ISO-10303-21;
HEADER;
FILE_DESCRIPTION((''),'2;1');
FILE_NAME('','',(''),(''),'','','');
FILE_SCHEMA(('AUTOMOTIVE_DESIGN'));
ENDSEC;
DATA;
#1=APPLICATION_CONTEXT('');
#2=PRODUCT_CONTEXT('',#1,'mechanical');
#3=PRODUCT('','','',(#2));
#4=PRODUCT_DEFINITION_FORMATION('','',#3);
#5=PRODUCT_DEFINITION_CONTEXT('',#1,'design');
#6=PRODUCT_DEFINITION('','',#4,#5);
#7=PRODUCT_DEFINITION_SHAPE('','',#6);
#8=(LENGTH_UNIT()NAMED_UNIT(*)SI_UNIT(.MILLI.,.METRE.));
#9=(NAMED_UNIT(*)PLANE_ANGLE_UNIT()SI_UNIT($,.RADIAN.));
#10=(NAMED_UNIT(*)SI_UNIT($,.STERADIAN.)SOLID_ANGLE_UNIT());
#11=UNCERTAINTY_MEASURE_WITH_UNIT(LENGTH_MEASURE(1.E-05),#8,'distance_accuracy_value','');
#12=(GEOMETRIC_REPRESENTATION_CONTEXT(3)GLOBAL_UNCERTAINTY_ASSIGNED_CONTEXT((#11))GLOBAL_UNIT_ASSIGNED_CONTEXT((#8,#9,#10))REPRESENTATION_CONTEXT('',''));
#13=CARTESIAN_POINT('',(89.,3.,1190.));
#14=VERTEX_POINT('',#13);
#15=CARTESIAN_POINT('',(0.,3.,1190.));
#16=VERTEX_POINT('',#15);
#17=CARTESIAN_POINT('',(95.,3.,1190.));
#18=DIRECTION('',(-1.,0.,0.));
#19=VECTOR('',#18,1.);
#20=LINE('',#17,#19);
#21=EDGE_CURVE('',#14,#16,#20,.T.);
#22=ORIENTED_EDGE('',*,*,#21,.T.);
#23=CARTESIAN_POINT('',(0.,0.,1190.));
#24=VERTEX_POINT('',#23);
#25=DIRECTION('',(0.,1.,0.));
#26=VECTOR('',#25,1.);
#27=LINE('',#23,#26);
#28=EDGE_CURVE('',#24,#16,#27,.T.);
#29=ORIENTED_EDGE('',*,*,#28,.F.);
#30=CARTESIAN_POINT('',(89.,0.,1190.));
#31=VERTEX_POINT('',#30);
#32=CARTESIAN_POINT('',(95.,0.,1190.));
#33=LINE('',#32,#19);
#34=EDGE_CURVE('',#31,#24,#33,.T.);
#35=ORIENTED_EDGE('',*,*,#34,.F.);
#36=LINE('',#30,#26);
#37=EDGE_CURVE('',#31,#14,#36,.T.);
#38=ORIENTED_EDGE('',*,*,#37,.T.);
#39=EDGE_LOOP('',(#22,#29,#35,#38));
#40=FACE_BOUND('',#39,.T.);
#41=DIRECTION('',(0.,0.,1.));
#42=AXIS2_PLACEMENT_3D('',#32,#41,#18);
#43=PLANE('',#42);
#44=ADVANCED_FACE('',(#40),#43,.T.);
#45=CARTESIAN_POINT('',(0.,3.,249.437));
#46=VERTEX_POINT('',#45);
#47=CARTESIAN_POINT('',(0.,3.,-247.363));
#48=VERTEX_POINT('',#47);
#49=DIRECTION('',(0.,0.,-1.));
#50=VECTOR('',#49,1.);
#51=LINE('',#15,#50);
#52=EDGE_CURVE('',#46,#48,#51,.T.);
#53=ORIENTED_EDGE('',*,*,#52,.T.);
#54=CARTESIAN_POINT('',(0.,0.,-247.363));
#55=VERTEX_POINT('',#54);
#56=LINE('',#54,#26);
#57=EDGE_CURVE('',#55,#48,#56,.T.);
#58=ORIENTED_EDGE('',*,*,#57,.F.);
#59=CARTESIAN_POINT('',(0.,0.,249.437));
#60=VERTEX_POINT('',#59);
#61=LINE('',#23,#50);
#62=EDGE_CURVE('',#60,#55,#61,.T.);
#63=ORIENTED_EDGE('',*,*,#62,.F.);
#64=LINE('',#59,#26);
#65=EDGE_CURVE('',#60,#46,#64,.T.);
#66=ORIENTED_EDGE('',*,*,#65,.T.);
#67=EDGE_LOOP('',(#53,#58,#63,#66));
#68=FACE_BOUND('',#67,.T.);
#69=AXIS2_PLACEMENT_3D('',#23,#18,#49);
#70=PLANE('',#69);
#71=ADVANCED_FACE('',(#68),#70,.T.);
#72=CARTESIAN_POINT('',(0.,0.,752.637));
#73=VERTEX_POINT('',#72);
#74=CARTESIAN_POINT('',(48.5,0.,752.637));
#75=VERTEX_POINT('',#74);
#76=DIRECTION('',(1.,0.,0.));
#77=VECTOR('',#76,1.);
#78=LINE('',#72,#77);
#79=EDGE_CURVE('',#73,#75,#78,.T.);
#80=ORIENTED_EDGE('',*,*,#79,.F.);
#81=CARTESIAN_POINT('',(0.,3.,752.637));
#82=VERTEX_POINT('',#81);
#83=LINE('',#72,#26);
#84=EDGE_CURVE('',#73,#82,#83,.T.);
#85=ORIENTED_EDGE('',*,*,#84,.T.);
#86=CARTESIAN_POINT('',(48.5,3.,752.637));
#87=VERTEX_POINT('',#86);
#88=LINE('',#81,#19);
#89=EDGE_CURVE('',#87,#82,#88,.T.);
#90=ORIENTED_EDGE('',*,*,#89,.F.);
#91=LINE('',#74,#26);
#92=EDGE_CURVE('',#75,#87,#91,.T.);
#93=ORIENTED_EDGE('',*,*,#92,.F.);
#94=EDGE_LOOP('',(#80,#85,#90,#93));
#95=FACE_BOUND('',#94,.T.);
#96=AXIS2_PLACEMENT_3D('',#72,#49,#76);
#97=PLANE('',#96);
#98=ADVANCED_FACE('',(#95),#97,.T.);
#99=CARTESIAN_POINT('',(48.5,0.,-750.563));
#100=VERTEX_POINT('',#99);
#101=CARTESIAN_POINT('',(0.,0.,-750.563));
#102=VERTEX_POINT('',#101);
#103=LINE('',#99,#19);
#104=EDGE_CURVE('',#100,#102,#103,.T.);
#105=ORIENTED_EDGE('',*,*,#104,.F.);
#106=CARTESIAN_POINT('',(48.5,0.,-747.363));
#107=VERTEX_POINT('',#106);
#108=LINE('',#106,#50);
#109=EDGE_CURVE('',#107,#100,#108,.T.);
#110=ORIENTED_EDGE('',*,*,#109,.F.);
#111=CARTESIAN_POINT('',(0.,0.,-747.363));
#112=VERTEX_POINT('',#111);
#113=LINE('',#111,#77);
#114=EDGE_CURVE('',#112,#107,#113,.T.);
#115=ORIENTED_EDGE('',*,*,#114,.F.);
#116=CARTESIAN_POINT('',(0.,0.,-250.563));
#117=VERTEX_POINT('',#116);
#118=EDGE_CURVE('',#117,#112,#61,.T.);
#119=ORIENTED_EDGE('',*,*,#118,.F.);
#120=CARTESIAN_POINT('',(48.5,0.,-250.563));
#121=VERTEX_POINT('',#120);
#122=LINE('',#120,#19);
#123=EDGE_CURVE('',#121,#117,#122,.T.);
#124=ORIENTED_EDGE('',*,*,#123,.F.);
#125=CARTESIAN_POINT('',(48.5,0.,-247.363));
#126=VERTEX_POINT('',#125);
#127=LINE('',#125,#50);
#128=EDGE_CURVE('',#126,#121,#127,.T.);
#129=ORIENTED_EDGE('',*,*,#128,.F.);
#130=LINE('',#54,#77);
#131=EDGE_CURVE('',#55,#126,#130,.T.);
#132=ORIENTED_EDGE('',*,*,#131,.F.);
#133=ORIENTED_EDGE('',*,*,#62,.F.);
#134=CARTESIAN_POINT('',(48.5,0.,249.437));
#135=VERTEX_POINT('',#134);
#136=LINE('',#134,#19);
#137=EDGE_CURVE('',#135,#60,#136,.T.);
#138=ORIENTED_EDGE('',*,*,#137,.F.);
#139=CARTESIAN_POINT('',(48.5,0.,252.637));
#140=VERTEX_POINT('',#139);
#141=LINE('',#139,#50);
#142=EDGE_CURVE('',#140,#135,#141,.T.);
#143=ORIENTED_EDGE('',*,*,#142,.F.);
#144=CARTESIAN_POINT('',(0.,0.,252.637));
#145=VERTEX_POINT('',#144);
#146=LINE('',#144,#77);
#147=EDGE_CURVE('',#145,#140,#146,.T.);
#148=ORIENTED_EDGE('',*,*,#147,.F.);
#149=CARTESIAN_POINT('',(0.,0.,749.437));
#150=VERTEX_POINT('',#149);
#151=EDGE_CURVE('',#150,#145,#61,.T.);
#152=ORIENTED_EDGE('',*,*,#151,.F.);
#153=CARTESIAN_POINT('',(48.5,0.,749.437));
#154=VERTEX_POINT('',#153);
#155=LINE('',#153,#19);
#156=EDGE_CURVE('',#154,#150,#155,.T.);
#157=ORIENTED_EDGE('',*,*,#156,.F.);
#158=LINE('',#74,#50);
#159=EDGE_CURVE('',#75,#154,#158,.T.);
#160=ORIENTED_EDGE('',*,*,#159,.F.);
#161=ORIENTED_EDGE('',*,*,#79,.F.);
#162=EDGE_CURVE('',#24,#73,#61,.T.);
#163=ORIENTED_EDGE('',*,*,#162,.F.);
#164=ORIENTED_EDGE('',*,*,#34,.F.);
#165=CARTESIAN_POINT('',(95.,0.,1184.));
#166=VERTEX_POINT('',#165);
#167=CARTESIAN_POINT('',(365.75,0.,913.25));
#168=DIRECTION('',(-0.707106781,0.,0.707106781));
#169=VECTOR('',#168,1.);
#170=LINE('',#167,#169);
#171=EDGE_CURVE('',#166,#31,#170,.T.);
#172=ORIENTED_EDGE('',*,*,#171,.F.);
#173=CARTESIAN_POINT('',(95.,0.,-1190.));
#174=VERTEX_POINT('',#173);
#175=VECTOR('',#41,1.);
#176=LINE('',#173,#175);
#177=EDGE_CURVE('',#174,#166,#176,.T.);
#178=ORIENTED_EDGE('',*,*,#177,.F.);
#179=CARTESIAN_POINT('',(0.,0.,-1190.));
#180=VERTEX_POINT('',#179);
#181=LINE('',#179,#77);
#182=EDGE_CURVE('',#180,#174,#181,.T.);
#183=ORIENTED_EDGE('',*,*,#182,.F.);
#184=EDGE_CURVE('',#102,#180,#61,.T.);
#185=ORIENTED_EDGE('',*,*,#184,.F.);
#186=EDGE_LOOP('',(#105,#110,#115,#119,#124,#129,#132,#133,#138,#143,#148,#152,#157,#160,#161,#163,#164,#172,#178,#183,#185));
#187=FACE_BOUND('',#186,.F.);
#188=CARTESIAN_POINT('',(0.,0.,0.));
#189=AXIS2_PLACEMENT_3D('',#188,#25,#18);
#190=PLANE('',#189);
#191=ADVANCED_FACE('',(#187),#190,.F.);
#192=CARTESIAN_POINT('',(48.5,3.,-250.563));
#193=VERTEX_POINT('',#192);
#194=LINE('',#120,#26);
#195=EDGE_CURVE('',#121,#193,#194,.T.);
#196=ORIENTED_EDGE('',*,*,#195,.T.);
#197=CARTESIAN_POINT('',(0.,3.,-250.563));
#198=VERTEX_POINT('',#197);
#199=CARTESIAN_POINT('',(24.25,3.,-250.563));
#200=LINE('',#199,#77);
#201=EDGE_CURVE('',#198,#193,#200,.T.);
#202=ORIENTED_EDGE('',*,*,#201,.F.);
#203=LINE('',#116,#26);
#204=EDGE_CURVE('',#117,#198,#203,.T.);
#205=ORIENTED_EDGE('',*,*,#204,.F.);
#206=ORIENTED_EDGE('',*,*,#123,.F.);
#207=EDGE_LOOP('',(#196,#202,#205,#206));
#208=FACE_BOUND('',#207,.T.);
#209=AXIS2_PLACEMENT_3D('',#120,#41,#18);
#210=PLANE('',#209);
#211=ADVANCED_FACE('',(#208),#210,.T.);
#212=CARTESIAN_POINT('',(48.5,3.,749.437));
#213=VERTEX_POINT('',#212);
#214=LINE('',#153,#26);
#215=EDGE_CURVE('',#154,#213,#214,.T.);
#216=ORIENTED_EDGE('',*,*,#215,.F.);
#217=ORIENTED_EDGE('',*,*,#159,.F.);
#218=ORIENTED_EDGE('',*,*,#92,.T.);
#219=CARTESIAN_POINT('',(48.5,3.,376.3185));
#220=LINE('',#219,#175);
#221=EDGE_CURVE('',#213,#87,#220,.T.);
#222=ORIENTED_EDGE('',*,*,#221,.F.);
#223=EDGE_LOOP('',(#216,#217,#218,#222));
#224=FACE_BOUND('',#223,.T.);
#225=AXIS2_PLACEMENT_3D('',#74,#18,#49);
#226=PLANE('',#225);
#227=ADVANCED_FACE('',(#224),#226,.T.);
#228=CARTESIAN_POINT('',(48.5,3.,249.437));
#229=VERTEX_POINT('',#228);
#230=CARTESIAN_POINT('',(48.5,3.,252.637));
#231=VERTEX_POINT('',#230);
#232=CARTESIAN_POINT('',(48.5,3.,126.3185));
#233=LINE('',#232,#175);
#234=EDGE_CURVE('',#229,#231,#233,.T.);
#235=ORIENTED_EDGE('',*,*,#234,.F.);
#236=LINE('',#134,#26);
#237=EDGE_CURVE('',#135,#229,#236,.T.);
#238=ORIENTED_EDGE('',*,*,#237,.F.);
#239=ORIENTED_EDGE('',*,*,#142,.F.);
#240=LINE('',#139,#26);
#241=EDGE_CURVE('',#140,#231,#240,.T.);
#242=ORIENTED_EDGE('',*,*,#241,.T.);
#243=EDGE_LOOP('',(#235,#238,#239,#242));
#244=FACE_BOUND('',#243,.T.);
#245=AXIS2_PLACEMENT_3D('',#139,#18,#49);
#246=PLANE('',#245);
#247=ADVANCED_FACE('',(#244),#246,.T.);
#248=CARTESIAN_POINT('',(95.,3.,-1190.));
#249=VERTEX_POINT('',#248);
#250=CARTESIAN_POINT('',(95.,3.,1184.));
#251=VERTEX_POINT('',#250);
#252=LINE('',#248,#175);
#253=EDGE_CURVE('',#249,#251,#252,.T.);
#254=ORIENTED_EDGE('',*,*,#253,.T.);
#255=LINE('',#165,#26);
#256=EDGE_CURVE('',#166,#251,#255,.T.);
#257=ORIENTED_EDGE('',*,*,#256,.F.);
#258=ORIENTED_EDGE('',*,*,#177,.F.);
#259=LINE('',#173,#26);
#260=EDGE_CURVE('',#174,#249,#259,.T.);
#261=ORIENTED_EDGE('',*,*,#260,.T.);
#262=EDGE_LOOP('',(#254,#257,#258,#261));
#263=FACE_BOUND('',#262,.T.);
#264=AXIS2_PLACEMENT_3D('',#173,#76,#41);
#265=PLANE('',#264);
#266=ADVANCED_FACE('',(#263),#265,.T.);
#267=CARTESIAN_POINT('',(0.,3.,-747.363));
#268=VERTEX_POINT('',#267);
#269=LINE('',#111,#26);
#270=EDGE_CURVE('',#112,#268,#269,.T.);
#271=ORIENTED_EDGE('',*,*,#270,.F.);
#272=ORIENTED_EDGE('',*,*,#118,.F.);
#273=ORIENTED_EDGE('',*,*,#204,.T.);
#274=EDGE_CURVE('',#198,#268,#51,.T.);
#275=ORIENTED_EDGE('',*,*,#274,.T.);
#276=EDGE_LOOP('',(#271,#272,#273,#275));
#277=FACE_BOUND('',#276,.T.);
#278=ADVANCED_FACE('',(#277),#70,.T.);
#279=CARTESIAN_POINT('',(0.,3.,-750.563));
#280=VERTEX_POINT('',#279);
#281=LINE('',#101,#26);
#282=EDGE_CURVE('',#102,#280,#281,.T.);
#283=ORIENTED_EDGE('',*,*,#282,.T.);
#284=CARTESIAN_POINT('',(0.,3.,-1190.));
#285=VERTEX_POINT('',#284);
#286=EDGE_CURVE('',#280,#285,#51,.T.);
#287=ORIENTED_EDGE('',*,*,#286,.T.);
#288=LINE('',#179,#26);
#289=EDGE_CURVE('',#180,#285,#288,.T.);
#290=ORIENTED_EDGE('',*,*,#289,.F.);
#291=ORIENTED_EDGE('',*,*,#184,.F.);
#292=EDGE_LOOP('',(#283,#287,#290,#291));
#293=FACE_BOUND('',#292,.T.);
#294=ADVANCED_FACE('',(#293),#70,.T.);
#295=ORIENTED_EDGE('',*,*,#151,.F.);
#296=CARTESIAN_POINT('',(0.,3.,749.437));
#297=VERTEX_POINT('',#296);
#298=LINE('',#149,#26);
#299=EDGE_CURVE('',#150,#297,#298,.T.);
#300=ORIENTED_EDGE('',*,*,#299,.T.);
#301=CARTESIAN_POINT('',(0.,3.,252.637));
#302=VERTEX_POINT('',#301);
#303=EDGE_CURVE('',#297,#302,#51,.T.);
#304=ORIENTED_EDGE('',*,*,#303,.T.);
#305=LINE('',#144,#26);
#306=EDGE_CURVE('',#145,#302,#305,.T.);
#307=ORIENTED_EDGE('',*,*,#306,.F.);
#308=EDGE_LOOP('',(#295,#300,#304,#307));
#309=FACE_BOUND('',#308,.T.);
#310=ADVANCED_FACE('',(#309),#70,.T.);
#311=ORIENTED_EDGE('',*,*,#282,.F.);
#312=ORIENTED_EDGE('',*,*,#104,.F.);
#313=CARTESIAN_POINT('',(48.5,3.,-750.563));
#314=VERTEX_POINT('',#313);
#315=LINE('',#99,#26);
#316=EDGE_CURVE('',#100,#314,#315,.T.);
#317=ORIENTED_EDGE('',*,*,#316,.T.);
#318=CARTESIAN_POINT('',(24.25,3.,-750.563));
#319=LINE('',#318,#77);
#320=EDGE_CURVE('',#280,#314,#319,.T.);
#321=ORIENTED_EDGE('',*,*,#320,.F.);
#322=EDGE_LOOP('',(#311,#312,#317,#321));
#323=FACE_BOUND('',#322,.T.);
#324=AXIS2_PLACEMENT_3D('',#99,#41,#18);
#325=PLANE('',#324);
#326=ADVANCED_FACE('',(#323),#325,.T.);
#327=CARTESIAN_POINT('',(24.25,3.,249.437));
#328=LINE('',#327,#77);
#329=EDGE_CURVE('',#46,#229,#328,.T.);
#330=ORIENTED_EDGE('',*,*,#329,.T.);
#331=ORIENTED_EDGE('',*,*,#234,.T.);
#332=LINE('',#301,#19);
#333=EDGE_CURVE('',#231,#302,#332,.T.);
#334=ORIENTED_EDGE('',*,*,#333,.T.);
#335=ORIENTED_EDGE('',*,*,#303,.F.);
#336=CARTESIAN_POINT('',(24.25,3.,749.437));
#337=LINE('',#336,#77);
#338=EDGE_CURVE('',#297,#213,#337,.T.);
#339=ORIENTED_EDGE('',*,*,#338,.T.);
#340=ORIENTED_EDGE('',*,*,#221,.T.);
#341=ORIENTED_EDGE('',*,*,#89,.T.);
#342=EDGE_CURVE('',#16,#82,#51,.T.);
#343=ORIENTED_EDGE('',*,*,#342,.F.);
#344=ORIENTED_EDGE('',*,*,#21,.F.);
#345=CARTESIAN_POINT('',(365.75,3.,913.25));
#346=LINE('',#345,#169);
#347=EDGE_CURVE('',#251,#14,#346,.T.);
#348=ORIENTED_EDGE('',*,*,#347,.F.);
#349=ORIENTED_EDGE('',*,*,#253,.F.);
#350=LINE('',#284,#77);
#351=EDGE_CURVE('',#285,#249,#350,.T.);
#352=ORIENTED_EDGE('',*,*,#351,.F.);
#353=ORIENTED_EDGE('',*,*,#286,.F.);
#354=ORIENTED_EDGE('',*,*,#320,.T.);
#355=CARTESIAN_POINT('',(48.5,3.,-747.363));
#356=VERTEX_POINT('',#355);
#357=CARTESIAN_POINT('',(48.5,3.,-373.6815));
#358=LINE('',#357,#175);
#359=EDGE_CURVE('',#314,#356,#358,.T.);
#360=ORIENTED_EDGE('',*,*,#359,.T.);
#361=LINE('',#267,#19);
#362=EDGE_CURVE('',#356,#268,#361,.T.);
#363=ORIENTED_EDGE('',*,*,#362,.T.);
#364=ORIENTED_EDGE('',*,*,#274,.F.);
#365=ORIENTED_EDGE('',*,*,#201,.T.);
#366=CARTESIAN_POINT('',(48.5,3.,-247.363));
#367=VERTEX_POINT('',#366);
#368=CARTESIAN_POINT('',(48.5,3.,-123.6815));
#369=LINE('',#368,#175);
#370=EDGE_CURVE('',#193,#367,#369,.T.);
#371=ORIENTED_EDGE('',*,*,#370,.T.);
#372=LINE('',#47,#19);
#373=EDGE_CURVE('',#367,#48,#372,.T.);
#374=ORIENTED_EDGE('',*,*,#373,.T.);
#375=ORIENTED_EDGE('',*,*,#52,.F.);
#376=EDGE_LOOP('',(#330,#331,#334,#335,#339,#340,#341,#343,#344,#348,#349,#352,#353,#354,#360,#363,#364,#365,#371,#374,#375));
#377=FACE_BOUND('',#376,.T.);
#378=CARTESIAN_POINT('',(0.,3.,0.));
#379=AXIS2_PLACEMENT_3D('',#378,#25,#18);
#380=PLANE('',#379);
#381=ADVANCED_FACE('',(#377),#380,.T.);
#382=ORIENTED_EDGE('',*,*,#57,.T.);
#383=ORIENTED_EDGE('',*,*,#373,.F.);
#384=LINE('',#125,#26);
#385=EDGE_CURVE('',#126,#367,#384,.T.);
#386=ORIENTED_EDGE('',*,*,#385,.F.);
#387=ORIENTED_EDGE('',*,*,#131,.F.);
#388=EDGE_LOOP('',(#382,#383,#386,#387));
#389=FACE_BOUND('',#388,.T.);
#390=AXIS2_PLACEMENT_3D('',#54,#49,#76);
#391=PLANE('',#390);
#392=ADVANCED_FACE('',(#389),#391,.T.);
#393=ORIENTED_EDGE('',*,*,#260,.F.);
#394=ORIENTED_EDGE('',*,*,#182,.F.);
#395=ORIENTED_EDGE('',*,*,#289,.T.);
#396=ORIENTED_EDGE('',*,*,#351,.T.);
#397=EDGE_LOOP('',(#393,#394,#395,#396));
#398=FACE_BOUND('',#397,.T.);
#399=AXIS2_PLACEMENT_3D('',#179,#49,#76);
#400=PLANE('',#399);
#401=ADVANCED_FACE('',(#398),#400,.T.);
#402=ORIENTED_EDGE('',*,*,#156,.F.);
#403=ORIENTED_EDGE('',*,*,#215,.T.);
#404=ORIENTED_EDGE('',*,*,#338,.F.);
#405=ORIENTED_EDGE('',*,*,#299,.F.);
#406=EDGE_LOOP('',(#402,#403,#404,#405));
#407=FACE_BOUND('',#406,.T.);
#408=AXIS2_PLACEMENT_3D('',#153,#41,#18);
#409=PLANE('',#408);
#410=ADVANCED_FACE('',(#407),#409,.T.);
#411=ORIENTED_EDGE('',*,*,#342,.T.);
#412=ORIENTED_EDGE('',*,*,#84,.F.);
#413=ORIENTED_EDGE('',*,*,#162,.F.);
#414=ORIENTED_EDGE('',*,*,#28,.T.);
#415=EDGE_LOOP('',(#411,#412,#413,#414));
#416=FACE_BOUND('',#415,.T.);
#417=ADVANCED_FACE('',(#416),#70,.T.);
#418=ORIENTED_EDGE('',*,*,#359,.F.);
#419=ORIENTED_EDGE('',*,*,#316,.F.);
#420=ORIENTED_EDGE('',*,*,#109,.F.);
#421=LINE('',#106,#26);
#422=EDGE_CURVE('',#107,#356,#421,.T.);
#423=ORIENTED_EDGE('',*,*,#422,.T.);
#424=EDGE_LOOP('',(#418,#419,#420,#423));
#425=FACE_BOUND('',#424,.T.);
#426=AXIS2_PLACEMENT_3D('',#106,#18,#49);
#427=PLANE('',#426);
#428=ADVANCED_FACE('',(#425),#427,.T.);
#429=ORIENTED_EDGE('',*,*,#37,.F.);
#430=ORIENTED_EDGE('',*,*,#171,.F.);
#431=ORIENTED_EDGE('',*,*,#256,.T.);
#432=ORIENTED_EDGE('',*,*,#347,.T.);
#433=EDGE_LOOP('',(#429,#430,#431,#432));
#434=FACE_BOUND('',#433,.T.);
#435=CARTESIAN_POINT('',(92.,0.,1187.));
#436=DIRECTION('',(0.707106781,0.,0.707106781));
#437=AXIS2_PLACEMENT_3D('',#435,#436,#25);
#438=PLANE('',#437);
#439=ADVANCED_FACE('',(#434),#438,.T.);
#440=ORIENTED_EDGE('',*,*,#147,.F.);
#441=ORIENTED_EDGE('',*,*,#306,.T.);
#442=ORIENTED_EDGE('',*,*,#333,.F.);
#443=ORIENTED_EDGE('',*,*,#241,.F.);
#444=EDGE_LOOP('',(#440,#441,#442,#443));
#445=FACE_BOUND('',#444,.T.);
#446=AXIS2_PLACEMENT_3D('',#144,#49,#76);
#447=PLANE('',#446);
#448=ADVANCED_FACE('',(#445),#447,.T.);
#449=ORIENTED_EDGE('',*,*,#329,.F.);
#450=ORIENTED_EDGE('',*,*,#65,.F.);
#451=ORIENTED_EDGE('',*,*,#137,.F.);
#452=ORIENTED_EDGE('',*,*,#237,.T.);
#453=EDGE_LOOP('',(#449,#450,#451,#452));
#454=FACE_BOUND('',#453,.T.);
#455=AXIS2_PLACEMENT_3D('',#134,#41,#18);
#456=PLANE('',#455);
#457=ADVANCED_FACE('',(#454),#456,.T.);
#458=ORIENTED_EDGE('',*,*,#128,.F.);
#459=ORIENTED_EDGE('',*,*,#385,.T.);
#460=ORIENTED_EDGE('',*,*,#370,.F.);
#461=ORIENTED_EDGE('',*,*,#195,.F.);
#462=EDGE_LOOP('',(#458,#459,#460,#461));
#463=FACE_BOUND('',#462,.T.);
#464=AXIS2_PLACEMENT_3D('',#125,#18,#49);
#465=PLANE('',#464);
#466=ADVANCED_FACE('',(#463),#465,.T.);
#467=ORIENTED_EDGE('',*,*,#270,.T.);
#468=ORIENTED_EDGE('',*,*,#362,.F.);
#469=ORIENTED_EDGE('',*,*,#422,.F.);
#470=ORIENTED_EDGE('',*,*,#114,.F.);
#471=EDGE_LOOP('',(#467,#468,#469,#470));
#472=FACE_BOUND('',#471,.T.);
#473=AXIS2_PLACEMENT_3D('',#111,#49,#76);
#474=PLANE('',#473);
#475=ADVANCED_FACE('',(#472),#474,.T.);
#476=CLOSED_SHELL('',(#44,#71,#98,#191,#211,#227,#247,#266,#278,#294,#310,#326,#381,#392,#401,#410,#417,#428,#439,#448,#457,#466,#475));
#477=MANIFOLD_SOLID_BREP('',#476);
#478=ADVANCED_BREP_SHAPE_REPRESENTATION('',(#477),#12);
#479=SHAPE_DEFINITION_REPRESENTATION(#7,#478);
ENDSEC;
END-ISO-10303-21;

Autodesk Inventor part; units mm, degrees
ref_plane "YZ Plane" through (0, 0, 0) normal (1, 0, 0) x (0, 1, 0)
ref_plane "XZ Plane" through (0, 0, 0) normal (0, 1, 0) x (-1, 0, 0)
ref_plane "XY Plane" through (0, 0, 0) normal (0, 0, 1) x (1, 0, 0)
sketch "Sketch6" plane through (0, 0, 0) normal (0, 1, 0) x (-1, 0, 0)
  line L0 (0, -1190) -> (-95, -1190)
  line L1 (-95, -1190) -> (-95, 1190)
  line L2 (-95, 1190) -> (0, 1190)
  line L3 (0, 1190) -> (0, -1190)
  point P0 (-4059.1747, 1994.2978)
  point P1 (0, 0)
  point P2 (0, 0)
  dimension "d26" = 95
  dimension "d27" = 2380
extrude "Plate4" add sketch "Sketch6" along normal blind 3
sketch "Sketch7" plane through (0, 0, 0) normal (0, -1, 0) x (1, 0, 0)
  line L0 (0, 1190) -> (95, 1190) projected
  line L1 (0, -1190) -> (0, 1190) projected
  line L2 (95, -1190) -> (0, -1190) projected
  line L3 (95, 1190) -> (95, -1190) projected
  line L4 (0, -747.363) -> (48.5, -747.363)
  line L5 (48.5, -747.363) -> (48.5, -750.563)
  line L6 (48.5, -750.563) -> (0, -750.563)
  line L7 (0, -750.563) -> (0, -747.363)
  point P0 (0, 0)
  point P1 (0, -750.563)
  point P2 (0, 200)
  point P3 (46.4173, 200)
  point P4 (0, -750.563)
  dimension "d29" = 48.5
  dimension "d30" = 3.2
  dimension "d31" = 439.437
extrude "Extrusion2" cut sketch "Sketch7" against normal through all contours L4 L5 L6 L1
pattern_linear "Rectangular Pattern1" count 5 spacing 500 along (0, 0, 1) of "Extrusion2"
chamfer "Corner Chamfer1" distance 6 angle 45 1 edges at (95, 1.5, 1190)
sketch "Sketch8" plane through (0, 0, 0) normal (0, -1, 0) x (1, 0, 0)
  line L0 (29.9047, -1161.7913) -> (29.9047, -981.1247) construction
  line L1 (29.9047, -981.1247) -> (52.3735, -981.1247) construction
  line L2 (52.3735, -981.1247) -> (52.3735, -1161.7913) construction
  line L3 (52.3735, -1161.7913) -> (29.9047, -1161.7913) construction
  point P0 (0, 0)
mark "Mark1"
equation "\"d28\" = Thickness"
equation "\"BendReliefWidth\" = Thickness"
equation "\"BendReliefDepth\" = 0.5 * Thickness"
equation "\"CornerReliefSize\" = 4 * Thickness"
equation "\"MinimumRemnant\" = 2 * Thickness"
equation "\"TransitionRadius\" = BendRadius"
equation "\"JacobiRadiusSize\" = BendRadius"
equation "\"GapSize\" = Thickness"
equation "\"Thickness\" = 3"
equation "\"BendRadius\" = 5"
properties part number "BSH 038 stringer butt end" material "09g2s"
